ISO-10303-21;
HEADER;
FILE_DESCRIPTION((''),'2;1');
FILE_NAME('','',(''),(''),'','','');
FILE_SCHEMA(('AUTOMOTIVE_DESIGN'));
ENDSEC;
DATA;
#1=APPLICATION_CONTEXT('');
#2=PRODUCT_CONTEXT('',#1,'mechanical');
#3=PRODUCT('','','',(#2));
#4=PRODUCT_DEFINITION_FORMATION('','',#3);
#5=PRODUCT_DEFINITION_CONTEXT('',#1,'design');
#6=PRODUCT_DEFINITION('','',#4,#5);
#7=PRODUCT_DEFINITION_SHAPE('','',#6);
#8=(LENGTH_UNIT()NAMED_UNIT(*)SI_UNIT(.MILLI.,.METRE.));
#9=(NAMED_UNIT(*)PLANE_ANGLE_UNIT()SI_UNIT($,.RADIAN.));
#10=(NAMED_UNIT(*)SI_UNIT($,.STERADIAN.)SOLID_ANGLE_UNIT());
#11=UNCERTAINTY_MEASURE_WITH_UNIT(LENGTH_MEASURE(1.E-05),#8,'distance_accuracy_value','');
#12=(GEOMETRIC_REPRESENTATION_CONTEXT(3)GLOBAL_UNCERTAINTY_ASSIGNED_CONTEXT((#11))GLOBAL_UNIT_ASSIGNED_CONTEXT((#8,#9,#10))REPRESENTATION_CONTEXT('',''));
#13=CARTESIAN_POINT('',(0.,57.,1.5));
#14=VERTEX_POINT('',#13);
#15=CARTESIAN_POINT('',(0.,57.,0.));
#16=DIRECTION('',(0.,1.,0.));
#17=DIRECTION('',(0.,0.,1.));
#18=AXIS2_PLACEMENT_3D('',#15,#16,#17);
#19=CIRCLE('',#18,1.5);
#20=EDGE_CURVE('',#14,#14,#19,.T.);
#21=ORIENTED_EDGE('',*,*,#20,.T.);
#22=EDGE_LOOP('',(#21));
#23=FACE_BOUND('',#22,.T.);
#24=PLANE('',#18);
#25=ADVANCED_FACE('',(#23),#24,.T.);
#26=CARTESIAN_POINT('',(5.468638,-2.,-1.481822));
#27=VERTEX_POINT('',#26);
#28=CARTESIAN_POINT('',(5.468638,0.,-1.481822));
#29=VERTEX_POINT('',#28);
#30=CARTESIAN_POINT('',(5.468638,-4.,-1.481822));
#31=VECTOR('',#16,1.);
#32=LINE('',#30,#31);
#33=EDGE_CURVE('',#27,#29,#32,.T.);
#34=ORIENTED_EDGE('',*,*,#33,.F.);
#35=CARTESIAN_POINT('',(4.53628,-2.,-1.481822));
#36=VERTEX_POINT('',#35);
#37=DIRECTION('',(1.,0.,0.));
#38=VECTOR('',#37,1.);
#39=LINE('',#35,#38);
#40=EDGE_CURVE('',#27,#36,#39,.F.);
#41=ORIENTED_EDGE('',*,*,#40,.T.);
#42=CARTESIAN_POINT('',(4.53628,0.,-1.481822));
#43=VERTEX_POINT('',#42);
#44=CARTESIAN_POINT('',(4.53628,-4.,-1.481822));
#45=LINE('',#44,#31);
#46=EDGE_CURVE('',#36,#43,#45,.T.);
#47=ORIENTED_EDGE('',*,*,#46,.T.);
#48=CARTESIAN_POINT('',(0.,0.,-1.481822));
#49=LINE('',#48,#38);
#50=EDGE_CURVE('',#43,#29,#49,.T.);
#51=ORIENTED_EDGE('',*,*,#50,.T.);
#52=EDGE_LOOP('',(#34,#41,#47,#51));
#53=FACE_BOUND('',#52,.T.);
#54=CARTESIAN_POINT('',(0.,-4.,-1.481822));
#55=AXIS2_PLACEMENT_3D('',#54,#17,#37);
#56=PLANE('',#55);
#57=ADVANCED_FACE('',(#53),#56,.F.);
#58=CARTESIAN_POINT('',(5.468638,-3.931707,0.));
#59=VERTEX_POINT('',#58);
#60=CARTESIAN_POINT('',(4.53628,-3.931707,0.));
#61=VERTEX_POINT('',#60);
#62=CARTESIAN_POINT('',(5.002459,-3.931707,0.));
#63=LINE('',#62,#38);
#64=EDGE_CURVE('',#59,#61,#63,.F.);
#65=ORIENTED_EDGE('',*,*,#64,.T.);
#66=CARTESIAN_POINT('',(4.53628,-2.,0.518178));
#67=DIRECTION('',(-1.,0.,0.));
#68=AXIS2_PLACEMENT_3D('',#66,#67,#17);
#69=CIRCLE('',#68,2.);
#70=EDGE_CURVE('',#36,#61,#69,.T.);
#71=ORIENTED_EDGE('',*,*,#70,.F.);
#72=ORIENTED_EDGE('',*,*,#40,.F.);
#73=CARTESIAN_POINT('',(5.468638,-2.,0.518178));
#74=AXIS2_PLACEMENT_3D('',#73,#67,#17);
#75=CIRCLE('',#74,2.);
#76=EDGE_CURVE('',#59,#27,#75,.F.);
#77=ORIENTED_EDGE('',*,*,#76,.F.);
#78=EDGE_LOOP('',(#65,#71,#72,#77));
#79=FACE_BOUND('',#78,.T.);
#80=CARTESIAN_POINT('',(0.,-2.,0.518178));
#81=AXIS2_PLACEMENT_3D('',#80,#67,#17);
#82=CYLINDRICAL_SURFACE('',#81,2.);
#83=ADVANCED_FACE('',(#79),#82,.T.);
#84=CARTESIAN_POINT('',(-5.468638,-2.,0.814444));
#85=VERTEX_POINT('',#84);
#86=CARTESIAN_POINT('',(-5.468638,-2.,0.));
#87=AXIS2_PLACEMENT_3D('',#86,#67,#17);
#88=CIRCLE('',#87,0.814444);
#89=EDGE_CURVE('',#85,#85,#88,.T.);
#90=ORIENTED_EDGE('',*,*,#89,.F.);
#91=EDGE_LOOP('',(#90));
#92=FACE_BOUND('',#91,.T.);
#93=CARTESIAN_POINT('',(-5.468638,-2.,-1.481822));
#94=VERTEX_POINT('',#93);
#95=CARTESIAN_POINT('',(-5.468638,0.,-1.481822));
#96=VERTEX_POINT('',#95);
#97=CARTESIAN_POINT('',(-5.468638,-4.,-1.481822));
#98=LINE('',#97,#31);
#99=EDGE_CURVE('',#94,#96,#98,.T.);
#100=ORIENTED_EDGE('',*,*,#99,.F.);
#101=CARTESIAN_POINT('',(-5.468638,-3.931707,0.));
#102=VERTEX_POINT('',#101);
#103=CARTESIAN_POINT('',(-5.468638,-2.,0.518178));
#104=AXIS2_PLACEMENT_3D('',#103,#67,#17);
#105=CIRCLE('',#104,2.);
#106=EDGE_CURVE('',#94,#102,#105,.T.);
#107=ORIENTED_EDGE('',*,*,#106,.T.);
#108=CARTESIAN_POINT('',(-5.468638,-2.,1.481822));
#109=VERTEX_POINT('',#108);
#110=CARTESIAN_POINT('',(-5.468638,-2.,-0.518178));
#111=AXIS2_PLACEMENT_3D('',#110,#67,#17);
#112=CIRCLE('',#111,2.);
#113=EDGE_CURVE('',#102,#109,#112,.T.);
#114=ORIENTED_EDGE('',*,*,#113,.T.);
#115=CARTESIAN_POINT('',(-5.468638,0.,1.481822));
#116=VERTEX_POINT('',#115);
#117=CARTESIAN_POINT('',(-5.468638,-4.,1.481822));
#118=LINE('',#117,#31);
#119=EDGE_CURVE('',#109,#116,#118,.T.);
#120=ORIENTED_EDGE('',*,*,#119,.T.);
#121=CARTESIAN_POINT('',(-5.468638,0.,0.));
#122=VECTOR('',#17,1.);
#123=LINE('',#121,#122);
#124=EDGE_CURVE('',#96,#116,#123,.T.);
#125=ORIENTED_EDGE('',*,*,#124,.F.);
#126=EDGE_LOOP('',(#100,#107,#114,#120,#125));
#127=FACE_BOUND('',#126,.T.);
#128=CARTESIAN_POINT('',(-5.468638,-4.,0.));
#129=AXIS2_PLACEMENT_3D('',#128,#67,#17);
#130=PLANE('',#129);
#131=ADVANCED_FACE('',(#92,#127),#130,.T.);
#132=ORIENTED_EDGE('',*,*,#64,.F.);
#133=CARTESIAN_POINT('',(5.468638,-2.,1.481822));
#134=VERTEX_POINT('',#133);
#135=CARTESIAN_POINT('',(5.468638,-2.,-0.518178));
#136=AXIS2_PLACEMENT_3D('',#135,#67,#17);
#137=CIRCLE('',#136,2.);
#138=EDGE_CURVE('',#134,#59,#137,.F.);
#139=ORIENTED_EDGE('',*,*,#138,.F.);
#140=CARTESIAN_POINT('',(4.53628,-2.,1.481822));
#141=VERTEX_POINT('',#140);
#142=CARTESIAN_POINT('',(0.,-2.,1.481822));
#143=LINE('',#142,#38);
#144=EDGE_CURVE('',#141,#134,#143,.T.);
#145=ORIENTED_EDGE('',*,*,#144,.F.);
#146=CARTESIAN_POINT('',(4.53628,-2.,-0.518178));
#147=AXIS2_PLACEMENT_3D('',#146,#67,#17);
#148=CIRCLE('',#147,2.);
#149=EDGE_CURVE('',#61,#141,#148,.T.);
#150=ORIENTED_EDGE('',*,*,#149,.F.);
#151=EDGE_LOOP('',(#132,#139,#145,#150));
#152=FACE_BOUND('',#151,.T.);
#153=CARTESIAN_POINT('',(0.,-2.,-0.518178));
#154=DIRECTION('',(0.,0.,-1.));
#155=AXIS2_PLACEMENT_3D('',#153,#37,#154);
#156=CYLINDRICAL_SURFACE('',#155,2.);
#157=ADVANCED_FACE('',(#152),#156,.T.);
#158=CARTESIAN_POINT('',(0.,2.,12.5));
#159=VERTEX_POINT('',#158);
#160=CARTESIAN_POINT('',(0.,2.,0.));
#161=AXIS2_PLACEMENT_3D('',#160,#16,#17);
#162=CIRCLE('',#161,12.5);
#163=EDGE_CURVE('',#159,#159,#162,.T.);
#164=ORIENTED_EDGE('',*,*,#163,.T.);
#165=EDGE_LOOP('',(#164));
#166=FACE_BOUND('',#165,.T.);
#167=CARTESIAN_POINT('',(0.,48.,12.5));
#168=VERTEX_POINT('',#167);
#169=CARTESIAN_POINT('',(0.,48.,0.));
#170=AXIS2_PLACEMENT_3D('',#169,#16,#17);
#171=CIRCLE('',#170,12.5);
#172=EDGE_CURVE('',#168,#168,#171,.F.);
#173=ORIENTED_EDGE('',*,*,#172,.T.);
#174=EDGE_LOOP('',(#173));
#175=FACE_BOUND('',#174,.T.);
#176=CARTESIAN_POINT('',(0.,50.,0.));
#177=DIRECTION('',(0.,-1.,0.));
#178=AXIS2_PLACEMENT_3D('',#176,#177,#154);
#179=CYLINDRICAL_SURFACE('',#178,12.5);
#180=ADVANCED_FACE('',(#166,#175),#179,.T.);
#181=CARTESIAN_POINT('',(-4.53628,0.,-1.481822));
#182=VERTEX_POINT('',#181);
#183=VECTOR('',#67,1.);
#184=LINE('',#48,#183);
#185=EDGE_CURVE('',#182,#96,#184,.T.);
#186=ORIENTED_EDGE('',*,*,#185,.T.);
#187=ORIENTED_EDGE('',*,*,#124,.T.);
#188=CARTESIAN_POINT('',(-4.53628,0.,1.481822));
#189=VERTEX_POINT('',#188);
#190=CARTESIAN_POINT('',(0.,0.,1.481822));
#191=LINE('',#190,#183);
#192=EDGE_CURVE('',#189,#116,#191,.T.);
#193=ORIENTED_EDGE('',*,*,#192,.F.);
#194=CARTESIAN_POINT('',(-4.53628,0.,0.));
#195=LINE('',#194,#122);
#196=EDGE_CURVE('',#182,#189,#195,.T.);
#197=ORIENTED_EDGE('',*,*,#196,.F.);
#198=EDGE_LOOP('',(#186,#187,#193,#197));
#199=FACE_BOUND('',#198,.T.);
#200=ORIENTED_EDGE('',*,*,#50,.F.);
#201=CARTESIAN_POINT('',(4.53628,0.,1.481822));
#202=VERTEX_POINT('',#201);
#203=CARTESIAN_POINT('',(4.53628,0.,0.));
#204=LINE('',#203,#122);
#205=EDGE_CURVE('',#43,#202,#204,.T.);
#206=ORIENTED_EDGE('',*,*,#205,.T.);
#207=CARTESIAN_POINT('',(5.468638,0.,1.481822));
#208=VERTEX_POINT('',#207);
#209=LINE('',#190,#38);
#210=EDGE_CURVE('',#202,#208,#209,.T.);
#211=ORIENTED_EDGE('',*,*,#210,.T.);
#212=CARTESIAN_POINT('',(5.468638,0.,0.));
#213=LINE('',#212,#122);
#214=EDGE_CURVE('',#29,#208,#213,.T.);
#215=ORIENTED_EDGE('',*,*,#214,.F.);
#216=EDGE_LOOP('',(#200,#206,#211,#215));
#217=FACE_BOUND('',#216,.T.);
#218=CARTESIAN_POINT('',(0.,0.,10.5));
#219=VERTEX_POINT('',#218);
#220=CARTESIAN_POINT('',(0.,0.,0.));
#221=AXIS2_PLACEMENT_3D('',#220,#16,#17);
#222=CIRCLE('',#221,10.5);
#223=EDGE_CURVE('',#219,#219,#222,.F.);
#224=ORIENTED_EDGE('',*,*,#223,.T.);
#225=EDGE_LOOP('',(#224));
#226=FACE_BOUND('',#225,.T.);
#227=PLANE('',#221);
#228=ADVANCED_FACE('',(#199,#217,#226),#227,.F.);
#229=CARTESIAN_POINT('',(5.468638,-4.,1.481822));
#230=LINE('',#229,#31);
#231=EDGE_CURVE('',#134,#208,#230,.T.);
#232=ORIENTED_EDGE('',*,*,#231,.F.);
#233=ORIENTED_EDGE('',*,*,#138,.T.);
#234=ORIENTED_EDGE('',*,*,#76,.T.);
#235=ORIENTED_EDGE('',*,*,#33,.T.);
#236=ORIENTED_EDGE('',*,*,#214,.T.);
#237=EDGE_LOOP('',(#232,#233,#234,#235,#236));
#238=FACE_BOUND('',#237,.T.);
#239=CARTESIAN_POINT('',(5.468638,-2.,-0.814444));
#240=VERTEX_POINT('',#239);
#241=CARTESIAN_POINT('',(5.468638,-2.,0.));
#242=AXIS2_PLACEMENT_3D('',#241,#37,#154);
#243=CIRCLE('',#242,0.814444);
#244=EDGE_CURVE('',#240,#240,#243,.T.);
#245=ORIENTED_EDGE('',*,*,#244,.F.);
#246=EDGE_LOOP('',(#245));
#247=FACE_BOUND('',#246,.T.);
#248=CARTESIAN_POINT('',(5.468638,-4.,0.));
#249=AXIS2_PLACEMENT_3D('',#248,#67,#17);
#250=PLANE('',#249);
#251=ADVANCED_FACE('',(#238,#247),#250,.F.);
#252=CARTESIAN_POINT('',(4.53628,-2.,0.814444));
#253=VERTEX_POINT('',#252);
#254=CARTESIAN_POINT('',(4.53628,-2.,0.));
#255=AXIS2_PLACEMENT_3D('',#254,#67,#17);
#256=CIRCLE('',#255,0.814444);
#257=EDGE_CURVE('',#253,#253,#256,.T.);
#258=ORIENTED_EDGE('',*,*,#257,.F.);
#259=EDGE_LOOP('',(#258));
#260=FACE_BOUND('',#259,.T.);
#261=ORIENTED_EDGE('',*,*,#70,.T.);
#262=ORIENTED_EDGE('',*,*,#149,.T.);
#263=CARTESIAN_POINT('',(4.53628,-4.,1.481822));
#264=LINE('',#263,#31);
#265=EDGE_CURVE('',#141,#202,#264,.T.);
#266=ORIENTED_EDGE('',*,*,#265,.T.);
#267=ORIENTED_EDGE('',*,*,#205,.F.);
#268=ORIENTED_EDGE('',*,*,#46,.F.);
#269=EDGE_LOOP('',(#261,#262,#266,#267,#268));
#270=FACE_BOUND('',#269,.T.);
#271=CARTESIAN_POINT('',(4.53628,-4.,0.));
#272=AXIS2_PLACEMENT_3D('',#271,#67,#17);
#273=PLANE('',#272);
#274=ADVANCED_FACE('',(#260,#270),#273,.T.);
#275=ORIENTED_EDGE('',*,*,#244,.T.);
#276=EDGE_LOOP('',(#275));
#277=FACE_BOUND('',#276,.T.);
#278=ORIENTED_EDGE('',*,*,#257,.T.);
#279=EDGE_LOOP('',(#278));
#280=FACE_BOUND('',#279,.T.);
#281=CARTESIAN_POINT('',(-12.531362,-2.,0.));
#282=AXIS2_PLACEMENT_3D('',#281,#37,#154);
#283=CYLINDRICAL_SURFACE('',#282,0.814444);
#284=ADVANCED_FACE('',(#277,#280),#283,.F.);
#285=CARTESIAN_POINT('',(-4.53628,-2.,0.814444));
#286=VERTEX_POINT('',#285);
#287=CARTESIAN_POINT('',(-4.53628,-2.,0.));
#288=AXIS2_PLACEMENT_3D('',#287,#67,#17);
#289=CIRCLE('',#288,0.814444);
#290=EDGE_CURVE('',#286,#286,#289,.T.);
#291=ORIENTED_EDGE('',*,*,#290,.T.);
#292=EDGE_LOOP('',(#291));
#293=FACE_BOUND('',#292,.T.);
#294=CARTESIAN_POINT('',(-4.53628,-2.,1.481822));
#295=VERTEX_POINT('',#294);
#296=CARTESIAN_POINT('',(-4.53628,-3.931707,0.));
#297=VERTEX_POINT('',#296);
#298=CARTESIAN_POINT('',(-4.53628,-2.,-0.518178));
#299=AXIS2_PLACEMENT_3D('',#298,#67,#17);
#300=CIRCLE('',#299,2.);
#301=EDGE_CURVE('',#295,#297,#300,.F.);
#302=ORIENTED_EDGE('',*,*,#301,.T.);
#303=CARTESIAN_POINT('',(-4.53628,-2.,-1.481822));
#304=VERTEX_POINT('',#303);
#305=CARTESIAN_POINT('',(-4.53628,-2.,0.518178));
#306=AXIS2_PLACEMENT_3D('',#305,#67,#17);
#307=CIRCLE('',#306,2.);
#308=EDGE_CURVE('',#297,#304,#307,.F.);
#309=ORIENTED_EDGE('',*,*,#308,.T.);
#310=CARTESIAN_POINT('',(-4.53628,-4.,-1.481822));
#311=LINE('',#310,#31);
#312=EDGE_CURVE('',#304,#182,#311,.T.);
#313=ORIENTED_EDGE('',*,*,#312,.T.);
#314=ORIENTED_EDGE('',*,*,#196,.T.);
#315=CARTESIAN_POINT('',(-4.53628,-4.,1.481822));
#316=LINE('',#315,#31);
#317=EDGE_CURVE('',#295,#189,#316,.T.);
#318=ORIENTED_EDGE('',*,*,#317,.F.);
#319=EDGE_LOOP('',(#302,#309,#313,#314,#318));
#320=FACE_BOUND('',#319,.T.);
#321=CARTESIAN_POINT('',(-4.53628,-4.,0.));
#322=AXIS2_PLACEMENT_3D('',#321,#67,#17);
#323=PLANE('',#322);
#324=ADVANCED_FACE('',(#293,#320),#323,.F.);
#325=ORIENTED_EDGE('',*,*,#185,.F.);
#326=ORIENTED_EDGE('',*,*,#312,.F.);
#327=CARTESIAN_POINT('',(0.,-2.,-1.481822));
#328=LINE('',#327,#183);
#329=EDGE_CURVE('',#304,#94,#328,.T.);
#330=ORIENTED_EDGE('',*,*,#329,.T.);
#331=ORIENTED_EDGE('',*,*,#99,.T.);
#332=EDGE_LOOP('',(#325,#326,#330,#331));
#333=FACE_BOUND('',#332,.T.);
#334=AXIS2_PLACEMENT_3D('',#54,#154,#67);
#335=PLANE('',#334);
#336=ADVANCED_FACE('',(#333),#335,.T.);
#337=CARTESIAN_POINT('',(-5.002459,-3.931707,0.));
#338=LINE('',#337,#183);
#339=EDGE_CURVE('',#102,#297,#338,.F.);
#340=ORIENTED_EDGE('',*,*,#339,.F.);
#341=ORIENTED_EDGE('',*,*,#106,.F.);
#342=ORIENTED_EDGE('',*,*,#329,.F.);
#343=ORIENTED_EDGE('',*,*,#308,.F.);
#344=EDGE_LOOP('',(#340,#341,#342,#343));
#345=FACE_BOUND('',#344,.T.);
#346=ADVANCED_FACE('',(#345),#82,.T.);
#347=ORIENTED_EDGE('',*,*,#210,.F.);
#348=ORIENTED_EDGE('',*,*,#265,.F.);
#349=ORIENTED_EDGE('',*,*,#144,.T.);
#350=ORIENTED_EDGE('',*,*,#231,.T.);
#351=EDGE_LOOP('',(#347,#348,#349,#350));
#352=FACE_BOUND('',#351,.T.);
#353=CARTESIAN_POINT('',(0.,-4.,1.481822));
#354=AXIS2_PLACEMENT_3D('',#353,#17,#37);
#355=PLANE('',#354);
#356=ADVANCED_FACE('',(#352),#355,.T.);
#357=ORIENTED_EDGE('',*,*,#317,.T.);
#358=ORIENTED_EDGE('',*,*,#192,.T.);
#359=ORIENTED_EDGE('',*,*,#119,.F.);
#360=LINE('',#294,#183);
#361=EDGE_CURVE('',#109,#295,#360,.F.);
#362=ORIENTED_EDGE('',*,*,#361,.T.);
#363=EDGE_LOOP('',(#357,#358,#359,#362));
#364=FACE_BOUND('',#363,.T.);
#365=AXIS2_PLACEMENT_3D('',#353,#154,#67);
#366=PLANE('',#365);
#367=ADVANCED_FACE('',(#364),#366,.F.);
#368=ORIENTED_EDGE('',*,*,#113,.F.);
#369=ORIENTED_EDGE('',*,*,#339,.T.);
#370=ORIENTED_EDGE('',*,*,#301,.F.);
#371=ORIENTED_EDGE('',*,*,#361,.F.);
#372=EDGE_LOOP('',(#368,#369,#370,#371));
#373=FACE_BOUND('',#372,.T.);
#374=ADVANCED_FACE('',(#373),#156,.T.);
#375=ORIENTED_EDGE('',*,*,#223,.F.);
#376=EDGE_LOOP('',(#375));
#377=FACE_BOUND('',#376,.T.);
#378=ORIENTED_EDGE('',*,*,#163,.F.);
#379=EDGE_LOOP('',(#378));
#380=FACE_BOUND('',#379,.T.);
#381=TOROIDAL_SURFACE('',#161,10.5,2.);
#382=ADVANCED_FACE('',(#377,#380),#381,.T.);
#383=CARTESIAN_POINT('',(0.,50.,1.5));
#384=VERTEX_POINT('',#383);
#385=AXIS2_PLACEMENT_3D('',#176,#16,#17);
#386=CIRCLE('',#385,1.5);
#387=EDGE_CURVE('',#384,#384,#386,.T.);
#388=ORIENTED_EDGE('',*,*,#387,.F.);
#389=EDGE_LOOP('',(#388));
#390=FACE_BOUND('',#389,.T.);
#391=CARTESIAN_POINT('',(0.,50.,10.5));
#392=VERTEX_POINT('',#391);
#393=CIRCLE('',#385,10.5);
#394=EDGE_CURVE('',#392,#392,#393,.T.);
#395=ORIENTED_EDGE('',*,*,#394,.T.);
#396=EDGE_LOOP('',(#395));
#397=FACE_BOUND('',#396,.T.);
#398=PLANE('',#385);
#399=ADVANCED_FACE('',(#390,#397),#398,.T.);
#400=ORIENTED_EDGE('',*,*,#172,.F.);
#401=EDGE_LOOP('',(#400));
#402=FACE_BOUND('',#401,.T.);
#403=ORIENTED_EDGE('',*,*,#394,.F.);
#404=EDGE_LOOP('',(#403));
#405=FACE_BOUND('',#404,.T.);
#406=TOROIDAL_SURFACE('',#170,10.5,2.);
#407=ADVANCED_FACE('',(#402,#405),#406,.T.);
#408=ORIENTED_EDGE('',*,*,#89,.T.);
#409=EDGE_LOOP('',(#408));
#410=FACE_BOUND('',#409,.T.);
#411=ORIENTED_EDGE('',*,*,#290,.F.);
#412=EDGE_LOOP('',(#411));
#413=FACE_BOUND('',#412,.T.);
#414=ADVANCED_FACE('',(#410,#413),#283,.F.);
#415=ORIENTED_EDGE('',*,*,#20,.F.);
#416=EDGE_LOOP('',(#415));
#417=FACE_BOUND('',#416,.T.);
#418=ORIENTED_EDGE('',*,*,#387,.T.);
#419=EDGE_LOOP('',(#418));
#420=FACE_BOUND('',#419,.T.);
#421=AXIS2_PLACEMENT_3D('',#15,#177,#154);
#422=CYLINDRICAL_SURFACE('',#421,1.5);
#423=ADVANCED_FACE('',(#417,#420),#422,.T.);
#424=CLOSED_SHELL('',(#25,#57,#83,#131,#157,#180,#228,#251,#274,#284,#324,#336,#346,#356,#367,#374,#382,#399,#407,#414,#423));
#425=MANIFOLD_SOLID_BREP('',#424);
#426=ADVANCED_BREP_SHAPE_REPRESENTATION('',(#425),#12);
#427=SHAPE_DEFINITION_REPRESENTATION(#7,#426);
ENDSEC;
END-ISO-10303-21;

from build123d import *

# Parameters (mm, degrees)
CROQUIS2_R              = 12.5
SALIENTE_EXTRUIR1_DEPTH = 50
REDONDEO1_R             = 2
CROQUIS4_R              = 1.5
SALIENTE_EXTRUIR2_DEPTH = 7
CROQUIS5_W              = 0.93235804
CROQUIS5_H              = 2.963644212
SALIENTE_EXTRUIR3_DEPTH = 4
REDONDEO2_R             = 2
CROQUIS6_R              = 0.814443909
CORTAR_EXTRUIR3_DEPTH   = 18


with BuildPart() as part:
    # Croquis2 → Saliente-Extruir1 (new body)
    with BuildSketch(Plane(origin=(0, 0, 0), x_dir=(1, 0, 0), z_dir=(0, 1, 0))):
        with Locations(Location((0, 0, 0), (0, 0, 270))):
            Circle(CROQUIS2_R)
    extrude(amount=SALIENTE_EXTRUIR1_DEPTH)

    # Redondeo1
    redondeo1_edges = [part.edges().sort_by_distance(p)[0] for p in [
        (0, 0, -12.5),
        (0, 50, -12.5),
    ]]
    fillet(redondeo1_edges, radius=REDONDEO1_R)

    # Croquis4 → Saliente-Extruir2 (add)
    with BuildSketch(Plane(origin=(0, 50, 0), x_dir=(1, 0, 0), z_dir=(0, 1, 0))):
        with Locations(Location((0, 0, 0), (0, 0, 270))):
            Circle(CROQUIS4_R)
    extrude(amount=SALIENTE_EXTRUIR2_DEPTH)

    # Croquis5 → Saliente-Extruir3 (add)
    with BuildSketch(Plane(origin=(0, 0, 0), x_dir=(-1, 0, 0), z_dir=(0, -1, 0))):
        with Locations((-5.00245948, 0)):
            Rectangle(CROQUIS5_W, CROQUIS5_H)
        with Locations((5.00245948, 0)):
            Rectangle(CROQUIS5_W, CROQUIS5_H)
    extrude(amount=SALIENTE_EXTRUIR3_DEPTH)

    # Redondeo2
    # the kernel refuses this fillet: 2 mm, written as the material it takes off along each edge
    with BuildSketch(Plane(origin=(-0.46371954, -4, -1.481822106), x_dir=(0, 1, 0), z_dir=(1, 0, 0)), Plane(origin=(10.4686385, -4, 1.481822106), x_dir=(0, 1, 0), z_dir=(-1, 0, 0))) as redondeo2_piece_1:
        with BuildLine():
            CenterArc((REDONDEO2_R, REDONDEO2_R), REDONDEO2_R, 180, 90)
            Line((0, REDONDEO2_R), (0, 0))
            Line((0, 0), (REDONDEO2_R, 0))
        make_face()
    extrude(amount=10.932358039, mode=Mode.SUBTRACT)
    with BuildSketch(Plane(origin=(-10.4686385, -4, 1.481822106), x_dir=(0, 1, 0), z_dir=(1, 0, 0)), Plane(origin=(0.46371954, -4, -1.481822106), x_dir=(0, 1, 0), z_dir=(-1, 0, 0))) as redondeo2_piece_2:
        with BuildLine():
            CenterArc((REDONDEO2_R, -REDONDEO2_R), REDONDEO2_R, 90, 90)
            Line((0, -REDONDEO2_R), (0, 0))
            Line((0, 0), (REDONDEO2_R, 0))
        make_face()
    extrude(amount=10.932358039, mode=Mode.SUBTRACT)

    # Croquis6 → Cortar-Extruir3 (cut)
    with BuildSketch(Plane(origin=(5.4686385, 0, 0), x_dir=(0, 0, -1), z_dir=(1, 0, 0))):
        with Locations((0, -2)):
            Circle(CROQUIS6_R)
    extrude(amount=-CORTAR_EXTRUIR3_DEPTH, mode=Mode.SUBTRACT)


solid = part.part
